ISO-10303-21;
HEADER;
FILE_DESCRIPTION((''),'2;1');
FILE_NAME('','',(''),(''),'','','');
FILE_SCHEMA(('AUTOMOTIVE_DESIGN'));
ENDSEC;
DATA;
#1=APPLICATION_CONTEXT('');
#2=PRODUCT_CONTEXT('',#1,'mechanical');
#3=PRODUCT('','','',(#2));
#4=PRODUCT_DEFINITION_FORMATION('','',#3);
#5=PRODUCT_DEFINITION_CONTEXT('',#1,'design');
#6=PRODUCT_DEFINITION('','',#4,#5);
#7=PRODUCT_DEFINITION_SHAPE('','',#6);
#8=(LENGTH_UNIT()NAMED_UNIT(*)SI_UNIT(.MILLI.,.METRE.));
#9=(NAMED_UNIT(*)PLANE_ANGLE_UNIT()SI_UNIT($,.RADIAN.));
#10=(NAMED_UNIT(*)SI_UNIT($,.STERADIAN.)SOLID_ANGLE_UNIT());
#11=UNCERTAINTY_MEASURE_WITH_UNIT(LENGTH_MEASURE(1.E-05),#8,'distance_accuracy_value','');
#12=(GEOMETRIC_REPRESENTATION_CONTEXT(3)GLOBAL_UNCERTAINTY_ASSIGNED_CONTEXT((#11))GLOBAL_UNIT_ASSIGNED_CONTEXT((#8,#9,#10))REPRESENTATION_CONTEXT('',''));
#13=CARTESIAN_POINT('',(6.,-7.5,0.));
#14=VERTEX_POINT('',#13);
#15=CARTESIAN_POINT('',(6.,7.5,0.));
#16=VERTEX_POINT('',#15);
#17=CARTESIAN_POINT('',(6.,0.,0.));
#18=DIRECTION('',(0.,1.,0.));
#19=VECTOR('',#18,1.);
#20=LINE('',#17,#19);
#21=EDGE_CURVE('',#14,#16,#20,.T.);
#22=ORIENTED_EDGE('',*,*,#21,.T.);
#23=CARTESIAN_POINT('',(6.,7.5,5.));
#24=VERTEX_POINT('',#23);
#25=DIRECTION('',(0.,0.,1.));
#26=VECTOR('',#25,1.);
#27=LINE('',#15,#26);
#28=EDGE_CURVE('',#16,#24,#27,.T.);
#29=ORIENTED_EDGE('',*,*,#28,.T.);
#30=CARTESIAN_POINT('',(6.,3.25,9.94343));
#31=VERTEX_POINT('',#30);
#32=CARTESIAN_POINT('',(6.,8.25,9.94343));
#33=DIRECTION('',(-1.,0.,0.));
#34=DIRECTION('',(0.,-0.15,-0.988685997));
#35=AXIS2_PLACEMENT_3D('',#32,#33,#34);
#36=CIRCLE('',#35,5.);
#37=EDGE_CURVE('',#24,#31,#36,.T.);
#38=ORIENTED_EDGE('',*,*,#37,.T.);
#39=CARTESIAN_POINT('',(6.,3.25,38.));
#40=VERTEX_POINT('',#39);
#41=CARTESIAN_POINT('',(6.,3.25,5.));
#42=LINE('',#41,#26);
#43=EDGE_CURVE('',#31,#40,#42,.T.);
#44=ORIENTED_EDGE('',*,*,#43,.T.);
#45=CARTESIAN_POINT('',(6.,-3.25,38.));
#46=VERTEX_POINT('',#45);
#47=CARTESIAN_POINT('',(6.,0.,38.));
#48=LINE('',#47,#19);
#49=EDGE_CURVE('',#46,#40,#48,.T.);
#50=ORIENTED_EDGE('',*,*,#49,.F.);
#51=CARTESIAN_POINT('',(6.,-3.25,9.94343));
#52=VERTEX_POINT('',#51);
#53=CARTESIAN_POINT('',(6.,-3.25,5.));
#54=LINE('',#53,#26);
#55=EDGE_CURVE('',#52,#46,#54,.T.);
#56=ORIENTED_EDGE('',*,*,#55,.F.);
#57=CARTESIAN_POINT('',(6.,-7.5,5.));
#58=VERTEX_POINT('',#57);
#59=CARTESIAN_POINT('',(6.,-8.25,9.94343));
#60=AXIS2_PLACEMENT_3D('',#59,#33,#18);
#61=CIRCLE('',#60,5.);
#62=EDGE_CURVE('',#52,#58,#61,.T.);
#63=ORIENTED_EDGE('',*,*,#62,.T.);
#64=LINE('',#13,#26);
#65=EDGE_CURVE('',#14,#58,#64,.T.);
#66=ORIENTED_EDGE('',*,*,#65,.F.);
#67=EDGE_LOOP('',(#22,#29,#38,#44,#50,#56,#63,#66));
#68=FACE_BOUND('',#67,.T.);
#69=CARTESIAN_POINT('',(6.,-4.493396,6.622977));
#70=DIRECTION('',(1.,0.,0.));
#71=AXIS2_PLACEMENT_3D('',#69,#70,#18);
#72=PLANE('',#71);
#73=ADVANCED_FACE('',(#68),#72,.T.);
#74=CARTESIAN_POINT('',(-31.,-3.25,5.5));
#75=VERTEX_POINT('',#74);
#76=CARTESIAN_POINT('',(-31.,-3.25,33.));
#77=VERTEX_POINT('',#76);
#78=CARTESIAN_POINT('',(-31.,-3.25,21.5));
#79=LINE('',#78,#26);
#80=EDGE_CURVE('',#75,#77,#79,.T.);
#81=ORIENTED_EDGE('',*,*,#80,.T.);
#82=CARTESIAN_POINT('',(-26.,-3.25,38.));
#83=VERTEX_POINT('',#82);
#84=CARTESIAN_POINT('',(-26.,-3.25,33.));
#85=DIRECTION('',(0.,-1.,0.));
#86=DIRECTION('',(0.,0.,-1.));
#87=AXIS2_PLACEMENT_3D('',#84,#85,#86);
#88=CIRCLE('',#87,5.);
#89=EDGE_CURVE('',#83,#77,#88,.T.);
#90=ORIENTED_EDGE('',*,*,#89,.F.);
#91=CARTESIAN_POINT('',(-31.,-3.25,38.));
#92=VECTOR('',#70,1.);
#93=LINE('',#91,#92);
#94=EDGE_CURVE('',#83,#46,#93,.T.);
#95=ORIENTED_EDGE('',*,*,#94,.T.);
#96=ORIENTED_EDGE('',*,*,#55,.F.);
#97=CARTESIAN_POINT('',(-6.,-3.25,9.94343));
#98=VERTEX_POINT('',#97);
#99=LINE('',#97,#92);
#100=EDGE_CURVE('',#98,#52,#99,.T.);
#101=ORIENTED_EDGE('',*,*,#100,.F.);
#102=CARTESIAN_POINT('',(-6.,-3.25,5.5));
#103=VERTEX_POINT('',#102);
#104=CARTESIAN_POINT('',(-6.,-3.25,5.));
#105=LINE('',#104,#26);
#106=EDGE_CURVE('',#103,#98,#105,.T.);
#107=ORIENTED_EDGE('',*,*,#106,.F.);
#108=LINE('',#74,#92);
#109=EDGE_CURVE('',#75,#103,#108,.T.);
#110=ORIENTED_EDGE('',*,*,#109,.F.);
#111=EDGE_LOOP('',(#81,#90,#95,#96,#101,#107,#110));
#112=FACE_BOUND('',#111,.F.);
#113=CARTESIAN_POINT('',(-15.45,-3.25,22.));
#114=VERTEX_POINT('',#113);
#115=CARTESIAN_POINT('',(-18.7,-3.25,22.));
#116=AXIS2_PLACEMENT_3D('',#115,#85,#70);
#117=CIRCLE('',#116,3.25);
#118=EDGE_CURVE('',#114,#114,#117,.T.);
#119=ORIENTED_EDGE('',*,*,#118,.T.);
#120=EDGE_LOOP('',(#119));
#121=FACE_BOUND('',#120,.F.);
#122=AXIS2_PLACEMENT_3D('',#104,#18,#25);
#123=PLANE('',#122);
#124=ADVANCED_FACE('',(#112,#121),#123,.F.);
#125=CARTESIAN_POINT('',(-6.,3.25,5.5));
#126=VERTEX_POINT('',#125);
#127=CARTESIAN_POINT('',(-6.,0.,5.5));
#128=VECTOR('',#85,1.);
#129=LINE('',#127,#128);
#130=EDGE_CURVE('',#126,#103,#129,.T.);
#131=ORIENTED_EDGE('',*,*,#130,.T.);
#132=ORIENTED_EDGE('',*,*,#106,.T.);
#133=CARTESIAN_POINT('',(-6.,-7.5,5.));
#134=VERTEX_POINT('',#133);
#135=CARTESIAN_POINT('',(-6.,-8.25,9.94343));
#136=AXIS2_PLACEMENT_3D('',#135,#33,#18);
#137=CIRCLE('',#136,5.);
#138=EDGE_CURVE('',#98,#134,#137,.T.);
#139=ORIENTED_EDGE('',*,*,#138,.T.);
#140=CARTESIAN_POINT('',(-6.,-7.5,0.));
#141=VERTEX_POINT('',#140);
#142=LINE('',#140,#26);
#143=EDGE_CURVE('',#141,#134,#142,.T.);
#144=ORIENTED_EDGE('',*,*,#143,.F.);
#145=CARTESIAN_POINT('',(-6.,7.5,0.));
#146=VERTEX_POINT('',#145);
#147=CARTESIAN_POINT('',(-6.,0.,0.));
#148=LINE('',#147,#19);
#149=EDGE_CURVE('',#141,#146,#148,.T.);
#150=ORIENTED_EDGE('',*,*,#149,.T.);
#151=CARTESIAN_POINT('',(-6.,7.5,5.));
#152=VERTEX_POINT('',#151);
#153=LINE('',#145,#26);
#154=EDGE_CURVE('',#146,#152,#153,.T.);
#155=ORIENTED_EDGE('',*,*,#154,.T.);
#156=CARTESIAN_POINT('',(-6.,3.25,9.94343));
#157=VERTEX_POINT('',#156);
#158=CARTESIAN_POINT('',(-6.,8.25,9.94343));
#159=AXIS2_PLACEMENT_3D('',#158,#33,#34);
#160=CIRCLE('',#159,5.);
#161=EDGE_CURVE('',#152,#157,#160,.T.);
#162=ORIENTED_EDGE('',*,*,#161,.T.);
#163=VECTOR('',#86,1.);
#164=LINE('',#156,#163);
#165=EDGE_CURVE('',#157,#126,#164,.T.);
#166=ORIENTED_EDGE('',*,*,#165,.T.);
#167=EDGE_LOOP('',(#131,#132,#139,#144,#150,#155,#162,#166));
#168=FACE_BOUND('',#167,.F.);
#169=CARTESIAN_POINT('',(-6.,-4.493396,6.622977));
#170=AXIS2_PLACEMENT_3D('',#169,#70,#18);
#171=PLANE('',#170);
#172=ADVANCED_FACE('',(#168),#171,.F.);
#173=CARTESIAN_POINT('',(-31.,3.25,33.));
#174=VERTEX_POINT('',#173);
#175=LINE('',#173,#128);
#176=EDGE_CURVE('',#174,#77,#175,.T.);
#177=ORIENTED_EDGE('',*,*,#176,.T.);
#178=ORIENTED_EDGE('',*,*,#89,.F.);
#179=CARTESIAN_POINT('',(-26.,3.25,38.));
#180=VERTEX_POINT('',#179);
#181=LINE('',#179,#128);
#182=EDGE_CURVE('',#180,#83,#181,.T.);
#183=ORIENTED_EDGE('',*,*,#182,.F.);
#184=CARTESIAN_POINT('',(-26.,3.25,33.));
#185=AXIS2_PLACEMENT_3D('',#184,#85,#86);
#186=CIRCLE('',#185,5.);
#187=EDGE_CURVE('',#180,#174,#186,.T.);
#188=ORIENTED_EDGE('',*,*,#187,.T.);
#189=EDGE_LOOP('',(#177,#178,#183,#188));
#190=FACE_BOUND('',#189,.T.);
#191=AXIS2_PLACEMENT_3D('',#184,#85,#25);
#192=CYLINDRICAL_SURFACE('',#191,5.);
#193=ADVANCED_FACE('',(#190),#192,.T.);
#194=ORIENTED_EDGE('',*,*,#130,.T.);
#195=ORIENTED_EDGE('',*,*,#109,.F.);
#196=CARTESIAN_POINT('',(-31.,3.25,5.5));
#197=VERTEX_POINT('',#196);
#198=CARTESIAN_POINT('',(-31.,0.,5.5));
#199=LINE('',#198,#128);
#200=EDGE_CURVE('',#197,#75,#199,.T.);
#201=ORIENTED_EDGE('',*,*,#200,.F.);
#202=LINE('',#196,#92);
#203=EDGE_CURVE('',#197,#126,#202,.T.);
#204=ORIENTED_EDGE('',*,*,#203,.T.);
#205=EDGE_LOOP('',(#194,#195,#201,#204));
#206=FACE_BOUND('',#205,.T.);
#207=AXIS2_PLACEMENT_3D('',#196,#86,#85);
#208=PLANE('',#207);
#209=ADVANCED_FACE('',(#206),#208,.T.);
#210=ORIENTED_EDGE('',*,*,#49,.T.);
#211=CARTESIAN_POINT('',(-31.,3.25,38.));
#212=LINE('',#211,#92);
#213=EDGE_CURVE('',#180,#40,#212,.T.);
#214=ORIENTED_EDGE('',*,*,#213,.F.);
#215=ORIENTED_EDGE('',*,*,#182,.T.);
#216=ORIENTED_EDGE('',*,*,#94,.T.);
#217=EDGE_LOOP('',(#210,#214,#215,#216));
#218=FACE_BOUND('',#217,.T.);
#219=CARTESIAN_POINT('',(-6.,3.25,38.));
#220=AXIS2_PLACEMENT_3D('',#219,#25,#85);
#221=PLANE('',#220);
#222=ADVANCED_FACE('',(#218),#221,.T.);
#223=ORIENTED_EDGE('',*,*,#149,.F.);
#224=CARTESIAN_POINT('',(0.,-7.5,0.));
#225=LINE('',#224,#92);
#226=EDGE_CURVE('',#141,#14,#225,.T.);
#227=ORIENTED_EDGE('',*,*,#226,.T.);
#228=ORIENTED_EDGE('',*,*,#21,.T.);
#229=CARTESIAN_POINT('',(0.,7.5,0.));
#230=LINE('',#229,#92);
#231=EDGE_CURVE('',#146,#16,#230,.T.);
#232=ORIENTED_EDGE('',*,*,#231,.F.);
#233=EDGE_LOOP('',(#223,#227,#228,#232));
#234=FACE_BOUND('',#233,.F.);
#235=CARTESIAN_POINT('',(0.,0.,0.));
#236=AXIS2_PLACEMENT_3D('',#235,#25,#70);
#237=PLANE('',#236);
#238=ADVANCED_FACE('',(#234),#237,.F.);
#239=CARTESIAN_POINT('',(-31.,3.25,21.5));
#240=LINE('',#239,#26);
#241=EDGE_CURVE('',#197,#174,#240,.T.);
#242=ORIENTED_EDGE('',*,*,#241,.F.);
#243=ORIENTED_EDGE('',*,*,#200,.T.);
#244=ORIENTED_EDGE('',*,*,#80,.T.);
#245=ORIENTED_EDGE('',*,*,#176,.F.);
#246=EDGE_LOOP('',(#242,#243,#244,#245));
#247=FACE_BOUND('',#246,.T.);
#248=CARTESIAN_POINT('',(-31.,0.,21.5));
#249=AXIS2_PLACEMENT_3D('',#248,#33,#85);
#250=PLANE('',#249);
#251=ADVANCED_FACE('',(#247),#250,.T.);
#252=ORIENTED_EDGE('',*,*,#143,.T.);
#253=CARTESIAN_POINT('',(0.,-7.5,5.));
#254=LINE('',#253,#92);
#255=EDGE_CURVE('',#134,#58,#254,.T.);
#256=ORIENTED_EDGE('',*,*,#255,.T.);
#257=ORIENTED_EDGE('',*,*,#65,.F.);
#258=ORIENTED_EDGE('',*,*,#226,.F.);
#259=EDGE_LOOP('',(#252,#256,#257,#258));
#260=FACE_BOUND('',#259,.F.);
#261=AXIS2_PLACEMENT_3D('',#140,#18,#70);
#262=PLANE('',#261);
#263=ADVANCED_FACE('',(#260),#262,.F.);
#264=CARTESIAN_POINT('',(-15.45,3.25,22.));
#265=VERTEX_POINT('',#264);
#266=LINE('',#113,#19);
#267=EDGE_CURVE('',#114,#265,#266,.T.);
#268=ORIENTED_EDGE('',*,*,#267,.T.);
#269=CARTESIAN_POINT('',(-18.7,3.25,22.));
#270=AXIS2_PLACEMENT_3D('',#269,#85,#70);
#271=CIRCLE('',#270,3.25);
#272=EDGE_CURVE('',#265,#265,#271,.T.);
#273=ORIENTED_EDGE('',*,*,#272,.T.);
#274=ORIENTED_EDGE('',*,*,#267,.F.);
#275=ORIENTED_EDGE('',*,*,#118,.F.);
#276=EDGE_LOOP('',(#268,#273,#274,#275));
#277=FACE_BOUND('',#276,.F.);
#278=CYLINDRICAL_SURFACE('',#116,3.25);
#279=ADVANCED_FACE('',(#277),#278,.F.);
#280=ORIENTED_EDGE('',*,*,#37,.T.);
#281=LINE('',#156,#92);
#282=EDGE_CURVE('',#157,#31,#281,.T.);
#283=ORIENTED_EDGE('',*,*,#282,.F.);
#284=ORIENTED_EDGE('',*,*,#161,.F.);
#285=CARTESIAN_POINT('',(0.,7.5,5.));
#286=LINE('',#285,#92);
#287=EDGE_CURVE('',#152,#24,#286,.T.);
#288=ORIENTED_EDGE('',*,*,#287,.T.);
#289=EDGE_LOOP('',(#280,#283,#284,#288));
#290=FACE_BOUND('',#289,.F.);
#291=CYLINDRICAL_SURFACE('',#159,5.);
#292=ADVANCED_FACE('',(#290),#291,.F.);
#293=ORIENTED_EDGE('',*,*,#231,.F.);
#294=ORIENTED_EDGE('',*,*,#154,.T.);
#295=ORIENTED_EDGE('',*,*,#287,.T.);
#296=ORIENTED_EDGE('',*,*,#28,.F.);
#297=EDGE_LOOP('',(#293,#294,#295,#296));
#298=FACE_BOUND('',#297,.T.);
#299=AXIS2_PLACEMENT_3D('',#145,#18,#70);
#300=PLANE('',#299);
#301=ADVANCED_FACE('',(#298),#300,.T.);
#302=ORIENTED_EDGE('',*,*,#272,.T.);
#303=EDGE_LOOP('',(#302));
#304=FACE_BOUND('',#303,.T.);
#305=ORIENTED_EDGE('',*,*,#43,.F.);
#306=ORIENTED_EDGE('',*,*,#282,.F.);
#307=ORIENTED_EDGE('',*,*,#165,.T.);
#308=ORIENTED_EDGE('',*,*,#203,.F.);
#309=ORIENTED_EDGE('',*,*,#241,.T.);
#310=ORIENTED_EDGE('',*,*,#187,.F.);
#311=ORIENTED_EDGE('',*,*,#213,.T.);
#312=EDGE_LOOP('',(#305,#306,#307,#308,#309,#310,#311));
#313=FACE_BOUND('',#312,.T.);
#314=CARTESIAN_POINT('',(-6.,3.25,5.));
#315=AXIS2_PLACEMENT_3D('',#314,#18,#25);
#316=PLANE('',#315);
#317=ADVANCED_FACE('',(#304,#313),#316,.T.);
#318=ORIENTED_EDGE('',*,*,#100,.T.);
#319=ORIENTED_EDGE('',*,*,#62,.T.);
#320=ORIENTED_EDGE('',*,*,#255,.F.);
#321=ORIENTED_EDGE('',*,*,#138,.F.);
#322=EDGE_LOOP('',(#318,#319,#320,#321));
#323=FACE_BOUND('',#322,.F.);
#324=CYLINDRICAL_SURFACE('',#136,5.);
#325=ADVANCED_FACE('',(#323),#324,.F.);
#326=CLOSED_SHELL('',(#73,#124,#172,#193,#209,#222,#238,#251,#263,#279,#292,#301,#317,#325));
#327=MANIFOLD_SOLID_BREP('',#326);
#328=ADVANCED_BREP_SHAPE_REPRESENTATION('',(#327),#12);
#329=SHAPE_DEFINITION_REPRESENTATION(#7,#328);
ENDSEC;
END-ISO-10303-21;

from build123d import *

# Parameters (mm, degrees)
F0_W        = 12
F0_H        = 15
F1_DEPTH    = 5
F2_W        = 12
F2_H        = 6.5
F3_DEPTH    = 33
F4_W        = 6.5
F4_H        = 33
F5_DEPTH    = 25
F6_T1_DEPTH = 12
F7_R        = 3.25
F8_DEPTH    = 25
F9_W        = 6.5
F9_H        = 0.5
F10_DEPTH   = 25
F11_R       = 5


# Not quite as in the source:
# - a fillet or chamfer that OpenCascade refuses, or shapes differently, is made with other operations: its cross-section is extruded or revolved along the edge and cut away or added


with BuildPart() as f1:
    # F0 (on Top) → F1 (new body)
    with BuildSketch(Plane.XY):
        Rectangle(F0_W, F0_H)
    extrude(amount=F1_DEPTH)

    # F2 (on face) → F3 (join)
    with BuildSketch(Plane.XY.offset(5)):
        Rectangle(F2_W, F2_H)
    extrude(amount=F3_DEPTH)

    # F4 (on face) → F5 (join)
    with BuildSketch(Plane(origin=(-6, 0, 0), x_dir=(0, -1, 0), z_dir=(-1, 0, 0))):
        with Locations((0, 21.5)):
            Rectangle(F4_W, F4_H)
    extrude(amount=F5_DEPTH)

    # F6: fillet of radius 5 on 2 edges, made by hand

    # F6_s2 → F6_t1 (join)
    with BuildSketch(Plane.YZ.offset(-6)):
        with BuildLine():
            ThreePointArc((-3.25, 9.9434299833), (-4.458562278, 6.6838287807), (-7.5, 5))
            Line((-7.5, 5), (-3.25, 5))
            Line((-3.25, 5), (-3.25, 9.9434299833))
        make_face()
        with BuildLine():
            ThreePointArc((7.5, 5), (4.458562278, 6.6838287807), (3.25, 9.9434299833))
            Line((3.25, 9.9434299833), (3.25, 5))
            Line((3.25, 5), (7.5, 5))
        make_face()
    extrude(amount=F6_T1_DEPTH)

    # F7 (on face) → F8 (cut)
    with BuildSketch(Plane.XZ.offset(3.25)):
        with Locations((-18.7, 22)):
            Circle(F7_R)
    extrude(amount=-F8_DEPTH, mode=Mode.SUBTRACT)

    # F9 (on face) → F10 (cut)
    with BuildSketch(Plane(origin=(-31, 0, 0), x_dir=(0, -1, 0), z_dir=(-1, 0, 0))):
        with Locations((0, 5.25)):
            Rectangle(F9_W, F9_H)
    extrude(amount=-F10_DEPTH, mode=Mode.SUBTRACT)

    # F11
    f11_edges = [f1.edges().sort_by_distance(p)[0] for p in [
        (-31, 0, 38),
    ]]
    fillet(f11_edges, radius=F11_R)


solid = f1.part
